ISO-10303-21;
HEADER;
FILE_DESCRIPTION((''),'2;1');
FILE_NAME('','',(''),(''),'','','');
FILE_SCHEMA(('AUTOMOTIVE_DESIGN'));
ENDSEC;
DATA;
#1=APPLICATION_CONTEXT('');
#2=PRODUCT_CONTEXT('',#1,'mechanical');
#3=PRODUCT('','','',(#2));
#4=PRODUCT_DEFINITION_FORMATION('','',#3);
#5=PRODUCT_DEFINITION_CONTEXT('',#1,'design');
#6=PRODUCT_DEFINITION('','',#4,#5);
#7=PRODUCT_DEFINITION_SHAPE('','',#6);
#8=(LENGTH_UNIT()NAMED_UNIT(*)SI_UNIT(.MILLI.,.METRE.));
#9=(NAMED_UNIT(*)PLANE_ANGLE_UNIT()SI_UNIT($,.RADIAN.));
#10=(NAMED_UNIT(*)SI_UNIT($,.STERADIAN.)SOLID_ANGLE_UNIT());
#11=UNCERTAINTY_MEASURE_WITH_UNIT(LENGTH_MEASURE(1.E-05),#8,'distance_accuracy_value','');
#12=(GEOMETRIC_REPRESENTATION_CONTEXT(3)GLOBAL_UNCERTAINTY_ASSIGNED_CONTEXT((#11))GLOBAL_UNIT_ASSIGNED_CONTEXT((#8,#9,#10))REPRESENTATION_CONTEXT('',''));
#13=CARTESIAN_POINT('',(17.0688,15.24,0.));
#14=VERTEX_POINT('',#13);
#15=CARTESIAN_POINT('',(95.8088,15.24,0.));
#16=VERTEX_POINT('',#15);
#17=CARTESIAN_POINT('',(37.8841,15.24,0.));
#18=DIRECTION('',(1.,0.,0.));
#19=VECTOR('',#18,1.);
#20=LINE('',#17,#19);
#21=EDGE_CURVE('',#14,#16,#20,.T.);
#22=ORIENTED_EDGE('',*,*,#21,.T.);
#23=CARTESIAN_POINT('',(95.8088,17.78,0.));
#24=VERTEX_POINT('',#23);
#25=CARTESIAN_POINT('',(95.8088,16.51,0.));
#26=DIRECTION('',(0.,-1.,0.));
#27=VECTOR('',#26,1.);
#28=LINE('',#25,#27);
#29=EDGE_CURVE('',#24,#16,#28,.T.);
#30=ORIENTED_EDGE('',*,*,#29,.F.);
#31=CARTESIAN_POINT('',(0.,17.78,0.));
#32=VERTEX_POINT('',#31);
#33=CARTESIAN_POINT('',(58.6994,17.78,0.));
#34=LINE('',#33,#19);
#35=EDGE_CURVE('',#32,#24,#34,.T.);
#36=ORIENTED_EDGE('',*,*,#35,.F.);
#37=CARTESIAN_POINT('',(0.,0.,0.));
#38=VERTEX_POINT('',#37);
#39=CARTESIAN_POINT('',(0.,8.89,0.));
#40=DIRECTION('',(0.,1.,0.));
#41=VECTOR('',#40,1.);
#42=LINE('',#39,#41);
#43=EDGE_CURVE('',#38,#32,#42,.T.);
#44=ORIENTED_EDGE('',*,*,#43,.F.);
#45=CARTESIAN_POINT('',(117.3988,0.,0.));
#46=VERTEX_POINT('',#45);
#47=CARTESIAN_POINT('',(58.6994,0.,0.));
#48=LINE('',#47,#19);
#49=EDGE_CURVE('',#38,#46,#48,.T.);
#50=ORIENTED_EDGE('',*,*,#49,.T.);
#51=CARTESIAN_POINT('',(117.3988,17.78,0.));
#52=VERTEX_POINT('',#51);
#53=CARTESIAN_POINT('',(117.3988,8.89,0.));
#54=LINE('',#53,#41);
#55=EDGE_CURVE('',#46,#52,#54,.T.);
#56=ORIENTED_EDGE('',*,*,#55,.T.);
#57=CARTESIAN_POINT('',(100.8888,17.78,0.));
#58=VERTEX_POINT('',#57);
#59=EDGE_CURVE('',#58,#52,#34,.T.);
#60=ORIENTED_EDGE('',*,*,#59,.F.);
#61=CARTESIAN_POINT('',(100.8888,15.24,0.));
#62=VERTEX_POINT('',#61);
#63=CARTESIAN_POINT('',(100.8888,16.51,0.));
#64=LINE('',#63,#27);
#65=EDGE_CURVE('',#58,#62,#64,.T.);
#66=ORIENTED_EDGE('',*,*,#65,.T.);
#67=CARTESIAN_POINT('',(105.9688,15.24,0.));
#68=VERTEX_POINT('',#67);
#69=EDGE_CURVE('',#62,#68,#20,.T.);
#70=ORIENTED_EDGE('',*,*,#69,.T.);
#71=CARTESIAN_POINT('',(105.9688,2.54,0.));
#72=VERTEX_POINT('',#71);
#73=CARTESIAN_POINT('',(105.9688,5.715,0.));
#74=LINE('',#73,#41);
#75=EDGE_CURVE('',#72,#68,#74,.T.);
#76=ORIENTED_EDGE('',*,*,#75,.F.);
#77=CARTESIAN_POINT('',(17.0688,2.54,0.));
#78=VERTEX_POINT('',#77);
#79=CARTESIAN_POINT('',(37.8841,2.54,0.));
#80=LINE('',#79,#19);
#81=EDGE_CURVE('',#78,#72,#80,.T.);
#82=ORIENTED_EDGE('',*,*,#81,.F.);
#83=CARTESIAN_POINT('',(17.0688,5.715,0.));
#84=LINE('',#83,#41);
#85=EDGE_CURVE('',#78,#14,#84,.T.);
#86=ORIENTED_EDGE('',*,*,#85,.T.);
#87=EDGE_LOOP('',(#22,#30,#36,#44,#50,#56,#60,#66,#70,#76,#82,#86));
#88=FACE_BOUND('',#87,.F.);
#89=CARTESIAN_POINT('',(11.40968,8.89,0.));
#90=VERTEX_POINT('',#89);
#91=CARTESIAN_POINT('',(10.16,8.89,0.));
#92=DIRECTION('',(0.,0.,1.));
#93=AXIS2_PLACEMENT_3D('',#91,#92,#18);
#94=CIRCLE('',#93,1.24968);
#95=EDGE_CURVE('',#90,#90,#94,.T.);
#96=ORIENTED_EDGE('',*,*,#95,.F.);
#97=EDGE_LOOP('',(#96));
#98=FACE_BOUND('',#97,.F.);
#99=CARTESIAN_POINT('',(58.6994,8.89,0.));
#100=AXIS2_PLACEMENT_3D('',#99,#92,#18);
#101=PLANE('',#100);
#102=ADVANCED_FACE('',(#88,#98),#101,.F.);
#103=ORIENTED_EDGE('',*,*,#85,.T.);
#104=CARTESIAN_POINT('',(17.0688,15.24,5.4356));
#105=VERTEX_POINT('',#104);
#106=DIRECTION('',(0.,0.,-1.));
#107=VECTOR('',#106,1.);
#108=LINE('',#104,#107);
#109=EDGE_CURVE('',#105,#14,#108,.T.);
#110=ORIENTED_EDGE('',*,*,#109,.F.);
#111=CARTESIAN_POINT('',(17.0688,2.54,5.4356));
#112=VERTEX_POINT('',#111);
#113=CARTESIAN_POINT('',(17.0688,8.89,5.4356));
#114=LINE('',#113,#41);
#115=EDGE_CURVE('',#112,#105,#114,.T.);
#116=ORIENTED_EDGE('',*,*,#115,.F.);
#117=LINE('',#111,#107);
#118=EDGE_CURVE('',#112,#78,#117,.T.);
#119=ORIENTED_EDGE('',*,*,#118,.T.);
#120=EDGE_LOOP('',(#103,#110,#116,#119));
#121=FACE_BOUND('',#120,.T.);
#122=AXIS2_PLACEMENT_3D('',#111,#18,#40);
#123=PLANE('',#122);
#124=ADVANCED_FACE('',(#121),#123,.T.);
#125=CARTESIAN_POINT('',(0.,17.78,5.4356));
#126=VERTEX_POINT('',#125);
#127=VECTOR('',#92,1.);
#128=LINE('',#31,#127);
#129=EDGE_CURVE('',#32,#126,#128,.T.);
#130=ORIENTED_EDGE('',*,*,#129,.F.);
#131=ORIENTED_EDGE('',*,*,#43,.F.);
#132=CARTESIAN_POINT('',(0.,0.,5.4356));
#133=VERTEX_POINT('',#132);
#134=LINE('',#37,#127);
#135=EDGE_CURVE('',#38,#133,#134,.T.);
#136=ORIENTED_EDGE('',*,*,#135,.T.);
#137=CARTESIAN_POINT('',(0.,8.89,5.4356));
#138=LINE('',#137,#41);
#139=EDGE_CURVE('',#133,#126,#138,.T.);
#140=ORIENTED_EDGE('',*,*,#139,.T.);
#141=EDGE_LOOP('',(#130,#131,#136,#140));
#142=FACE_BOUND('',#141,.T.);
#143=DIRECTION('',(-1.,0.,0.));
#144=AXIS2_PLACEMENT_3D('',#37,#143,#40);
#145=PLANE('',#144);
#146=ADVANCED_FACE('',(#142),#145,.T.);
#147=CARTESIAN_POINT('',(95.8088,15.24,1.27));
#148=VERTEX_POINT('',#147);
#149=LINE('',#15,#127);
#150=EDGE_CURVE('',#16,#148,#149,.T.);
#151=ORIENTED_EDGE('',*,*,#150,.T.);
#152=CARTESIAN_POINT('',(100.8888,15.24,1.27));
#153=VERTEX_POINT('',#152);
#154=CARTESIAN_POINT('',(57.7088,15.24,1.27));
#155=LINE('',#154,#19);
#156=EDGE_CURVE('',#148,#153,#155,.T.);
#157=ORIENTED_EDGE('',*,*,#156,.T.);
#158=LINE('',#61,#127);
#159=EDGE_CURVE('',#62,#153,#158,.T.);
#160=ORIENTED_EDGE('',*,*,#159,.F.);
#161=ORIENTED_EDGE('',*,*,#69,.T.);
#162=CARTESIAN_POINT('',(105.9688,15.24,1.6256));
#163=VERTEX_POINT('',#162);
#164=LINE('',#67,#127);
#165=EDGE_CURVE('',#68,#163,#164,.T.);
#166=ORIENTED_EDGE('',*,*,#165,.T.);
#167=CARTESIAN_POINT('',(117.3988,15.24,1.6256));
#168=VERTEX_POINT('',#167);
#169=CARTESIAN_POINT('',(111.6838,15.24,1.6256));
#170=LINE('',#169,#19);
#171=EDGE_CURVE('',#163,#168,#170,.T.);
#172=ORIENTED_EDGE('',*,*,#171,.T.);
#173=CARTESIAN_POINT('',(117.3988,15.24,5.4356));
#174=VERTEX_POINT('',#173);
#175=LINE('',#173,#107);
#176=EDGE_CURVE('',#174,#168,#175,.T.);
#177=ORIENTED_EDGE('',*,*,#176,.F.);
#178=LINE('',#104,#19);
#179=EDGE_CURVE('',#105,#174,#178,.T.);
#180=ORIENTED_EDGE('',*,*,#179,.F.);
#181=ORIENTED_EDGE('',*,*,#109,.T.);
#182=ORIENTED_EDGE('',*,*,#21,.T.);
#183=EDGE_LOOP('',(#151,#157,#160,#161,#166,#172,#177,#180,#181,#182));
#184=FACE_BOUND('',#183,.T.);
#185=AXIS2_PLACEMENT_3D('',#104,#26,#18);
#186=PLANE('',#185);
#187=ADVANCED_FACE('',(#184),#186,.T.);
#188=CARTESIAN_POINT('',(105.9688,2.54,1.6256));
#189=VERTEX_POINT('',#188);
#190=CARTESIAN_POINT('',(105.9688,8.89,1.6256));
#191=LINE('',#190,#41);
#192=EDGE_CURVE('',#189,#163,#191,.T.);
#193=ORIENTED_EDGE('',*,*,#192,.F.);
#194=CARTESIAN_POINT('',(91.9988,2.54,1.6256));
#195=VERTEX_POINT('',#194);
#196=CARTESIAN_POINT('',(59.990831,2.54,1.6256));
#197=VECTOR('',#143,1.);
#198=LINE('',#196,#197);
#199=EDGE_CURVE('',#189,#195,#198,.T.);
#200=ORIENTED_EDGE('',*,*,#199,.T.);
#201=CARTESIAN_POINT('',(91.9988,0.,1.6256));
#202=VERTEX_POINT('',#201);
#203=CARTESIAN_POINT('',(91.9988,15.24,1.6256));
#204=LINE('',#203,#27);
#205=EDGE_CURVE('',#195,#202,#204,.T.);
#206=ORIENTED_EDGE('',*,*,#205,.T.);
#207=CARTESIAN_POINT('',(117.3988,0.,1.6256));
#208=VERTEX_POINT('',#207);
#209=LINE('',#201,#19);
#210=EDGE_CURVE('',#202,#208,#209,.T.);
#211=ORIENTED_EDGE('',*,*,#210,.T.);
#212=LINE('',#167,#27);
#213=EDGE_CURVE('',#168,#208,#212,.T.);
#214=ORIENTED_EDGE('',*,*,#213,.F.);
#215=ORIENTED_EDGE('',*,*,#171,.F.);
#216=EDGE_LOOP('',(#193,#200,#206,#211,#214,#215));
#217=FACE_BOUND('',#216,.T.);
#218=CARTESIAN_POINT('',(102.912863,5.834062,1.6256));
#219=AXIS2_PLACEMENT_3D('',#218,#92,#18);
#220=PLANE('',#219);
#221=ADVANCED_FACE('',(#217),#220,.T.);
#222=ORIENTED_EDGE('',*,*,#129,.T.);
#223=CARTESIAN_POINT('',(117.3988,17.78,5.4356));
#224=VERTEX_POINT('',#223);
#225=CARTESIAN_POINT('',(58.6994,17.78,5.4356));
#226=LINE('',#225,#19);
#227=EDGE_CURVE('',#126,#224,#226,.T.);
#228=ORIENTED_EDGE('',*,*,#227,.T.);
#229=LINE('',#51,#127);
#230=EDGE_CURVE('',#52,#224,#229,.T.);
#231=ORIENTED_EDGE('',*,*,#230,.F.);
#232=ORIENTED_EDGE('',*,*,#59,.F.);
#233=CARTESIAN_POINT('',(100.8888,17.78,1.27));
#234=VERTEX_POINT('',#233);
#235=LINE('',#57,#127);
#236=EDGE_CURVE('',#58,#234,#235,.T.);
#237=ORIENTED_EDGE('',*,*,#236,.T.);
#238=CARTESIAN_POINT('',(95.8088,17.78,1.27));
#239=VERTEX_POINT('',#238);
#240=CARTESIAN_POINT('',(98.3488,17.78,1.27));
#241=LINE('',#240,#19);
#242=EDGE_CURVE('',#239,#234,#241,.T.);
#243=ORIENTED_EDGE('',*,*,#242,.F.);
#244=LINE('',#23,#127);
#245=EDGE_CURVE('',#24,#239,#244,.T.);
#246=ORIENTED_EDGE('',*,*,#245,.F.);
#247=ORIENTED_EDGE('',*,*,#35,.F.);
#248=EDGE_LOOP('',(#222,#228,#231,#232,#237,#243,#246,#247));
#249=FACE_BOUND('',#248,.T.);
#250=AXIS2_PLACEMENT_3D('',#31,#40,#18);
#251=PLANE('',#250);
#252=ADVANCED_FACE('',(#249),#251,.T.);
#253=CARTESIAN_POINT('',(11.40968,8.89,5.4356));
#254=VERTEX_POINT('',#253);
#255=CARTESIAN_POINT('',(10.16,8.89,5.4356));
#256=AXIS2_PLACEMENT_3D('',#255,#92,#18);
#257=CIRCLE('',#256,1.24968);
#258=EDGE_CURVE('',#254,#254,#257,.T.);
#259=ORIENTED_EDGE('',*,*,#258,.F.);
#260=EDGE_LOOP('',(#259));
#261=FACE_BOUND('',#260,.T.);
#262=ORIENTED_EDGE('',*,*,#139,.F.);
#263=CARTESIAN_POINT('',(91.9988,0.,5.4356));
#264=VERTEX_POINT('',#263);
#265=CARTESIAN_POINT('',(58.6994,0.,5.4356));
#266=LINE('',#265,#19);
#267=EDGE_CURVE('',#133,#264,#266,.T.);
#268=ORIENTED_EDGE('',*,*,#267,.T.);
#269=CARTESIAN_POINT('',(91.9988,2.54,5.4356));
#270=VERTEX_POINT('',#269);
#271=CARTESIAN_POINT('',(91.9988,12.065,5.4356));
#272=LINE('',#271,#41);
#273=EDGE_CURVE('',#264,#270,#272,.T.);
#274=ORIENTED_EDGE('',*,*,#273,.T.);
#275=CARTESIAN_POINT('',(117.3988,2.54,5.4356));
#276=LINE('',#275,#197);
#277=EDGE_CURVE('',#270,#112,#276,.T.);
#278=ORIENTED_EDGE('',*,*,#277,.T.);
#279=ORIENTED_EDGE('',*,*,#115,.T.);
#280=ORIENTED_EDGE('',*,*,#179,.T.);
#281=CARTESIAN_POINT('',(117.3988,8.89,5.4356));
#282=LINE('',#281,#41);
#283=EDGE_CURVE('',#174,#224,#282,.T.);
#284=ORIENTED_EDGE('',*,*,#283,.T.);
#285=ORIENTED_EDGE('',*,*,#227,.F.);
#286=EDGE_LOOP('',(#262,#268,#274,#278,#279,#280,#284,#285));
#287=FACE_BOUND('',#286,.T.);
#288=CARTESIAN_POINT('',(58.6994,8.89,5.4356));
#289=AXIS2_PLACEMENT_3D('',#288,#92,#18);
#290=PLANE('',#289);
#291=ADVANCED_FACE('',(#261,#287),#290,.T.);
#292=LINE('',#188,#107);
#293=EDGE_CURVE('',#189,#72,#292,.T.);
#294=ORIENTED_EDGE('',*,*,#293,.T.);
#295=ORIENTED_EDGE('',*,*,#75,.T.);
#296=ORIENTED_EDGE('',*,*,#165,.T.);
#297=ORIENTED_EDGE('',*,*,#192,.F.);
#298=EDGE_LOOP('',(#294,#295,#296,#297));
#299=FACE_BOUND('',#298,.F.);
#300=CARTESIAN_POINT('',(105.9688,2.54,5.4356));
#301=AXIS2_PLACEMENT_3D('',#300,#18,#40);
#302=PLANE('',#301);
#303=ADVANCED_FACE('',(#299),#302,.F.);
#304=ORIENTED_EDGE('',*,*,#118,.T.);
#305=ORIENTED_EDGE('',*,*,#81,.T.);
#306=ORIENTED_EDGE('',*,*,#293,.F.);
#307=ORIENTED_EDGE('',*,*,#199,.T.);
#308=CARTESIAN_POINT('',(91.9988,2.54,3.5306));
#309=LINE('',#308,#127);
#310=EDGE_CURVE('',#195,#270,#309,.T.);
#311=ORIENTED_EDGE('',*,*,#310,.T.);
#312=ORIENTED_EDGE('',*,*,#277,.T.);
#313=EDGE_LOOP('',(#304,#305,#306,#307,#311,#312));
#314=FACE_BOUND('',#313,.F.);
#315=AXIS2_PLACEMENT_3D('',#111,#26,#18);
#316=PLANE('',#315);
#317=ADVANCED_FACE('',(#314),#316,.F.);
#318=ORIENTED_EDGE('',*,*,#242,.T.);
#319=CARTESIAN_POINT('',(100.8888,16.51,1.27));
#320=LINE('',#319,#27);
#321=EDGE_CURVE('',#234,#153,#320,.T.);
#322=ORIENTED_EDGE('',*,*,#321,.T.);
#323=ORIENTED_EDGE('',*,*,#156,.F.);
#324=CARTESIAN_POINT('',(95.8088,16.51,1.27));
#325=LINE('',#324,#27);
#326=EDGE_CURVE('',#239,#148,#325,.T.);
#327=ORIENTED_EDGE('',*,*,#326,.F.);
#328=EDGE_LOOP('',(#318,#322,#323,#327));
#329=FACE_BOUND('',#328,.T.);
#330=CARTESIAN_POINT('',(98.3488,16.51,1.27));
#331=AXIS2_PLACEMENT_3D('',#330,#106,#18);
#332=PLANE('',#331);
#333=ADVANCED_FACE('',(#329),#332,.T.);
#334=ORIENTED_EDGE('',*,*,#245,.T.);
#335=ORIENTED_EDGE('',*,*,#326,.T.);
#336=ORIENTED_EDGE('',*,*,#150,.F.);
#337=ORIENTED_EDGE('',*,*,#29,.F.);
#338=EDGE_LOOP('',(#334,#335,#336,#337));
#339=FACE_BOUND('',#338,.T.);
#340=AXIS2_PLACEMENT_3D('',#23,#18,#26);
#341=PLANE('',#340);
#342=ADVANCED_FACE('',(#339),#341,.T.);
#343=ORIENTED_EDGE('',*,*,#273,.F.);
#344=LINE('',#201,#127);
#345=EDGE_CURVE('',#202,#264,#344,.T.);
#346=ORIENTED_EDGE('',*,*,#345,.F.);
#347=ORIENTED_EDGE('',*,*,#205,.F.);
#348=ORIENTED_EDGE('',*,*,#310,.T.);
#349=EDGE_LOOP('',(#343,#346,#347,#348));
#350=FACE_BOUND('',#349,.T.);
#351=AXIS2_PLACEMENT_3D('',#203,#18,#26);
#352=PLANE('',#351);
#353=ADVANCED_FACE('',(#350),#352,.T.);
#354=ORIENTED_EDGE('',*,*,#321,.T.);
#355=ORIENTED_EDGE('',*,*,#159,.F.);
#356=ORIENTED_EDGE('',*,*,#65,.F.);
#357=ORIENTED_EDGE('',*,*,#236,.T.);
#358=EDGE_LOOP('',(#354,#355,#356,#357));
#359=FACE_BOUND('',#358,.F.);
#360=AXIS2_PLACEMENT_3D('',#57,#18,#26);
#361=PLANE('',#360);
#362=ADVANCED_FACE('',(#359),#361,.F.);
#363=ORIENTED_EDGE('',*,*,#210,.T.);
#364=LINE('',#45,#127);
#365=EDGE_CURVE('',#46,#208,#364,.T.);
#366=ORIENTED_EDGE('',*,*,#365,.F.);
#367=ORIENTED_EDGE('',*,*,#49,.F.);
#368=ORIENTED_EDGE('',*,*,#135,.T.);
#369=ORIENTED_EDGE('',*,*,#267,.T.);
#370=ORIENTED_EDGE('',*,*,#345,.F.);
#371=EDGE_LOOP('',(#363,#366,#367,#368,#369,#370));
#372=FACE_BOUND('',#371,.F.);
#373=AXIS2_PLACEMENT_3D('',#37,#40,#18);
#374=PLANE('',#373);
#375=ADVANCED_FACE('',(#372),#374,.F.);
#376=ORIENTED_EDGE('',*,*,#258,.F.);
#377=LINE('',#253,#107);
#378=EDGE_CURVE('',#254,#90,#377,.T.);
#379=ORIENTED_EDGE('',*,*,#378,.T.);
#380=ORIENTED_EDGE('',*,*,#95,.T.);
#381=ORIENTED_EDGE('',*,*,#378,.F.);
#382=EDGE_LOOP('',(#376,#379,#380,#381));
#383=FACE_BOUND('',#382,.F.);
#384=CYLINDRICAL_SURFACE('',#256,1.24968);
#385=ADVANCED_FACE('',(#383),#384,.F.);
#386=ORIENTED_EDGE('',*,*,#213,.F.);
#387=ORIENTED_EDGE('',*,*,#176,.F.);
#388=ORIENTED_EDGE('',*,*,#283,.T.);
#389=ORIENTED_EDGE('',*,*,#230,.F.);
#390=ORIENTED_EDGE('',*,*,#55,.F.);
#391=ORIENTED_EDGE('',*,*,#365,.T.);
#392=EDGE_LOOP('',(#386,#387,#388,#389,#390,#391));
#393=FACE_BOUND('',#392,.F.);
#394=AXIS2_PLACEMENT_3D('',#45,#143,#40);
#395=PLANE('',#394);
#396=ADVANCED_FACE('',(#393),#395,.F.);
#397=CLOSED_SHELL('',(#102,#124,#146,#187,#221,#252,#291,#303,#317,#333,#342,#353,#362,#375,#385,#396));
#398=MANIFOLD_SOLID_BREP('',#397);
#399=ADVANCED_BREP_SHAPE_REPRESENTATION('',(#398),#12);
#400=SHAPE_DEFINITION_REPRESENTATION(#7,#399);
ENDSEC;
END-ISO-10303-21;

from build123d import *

# Parameters (mm, degrees)
F0_W      = 117.3988
F0_H      = 17.78
F1_DEPTH  = 5.4356
F2_W      = 88.9
F2_H      = 12.7
F3_DEPTH  = 25.4
F4_W      = 11.43
F4_H      = 12.7
F5_DEPTH  = 3.81
F7_DEPTH  = 169
F8_R      = 1.24968
F9_DEPTH  = 5.4356
F10_W     = 5.08
F10_H     = 2.54
F11_DEPTH = 1.27


# Not quite as in the source:
# - an extrude ends at something that could not be found from the text; its depth is read off the source's solid


with BuildPart() as f1:
    # F0 (on Top) → F1 (new body)
    with BuildSketch(Plane.XY):
        with Locations((58.6994, 8.89)):
            Rectangle(F0_W, F0_H)
    extrude(amount=F1_DEPTH)

    # F2 (on face) → F3 (cut)
    with BuildSketch(Plane.XY.offset(5.4356)):
        with Locations((61.5188, 8.89)):
            Rectangle(F2_W, F2_H)
    extrude(amount=-F3_DEPTH, mode=Mode.SUBTRACT)

    # F4 (on face) → F5 (cut)
    with BuildSketch(Plane.XY.offset(5.4356)):
        with Locations((111.6838, 8.89)):
            Rectangle(F4_W, F4_H)
    extrude(amount=-F5_DEPTH, mode=Mode.SUBTRACT)

    # F6 (on face) → F7 (cut, through all)
    with BuildSketch(Plane.XY.offset(1.6256)):
        Polygon((105.9688, 2.54), (105.9688, 15.24), (91.9988, 15.24), (91.9988, 0), (117.3988, 0), (117.3988, 2.54), align=None)
    extrude(amount=F7_DEPTH, mode=Mode.SUBTRACT)

    # F8 (on face) → F9 (cut, through all)
    with BuildSketch(Plane.XY.offset(5.4356)):
        with Locations((10.16, 8.89)):
            Circle(F8_R)
    extrude(amount=-F9_DEPTH, mode=Mode.SUBTRACT)

    # F10 (on face) → F11 (cut)
    with BuildSketch(Plane(origin=(0, 0, 0), x_dir=(1, 0, 0), z_dir=(0, 0, -1))):
        with Locations((98.3488, -16.51)):
            Rectangle(F10_W, F10_H)
        Polygon((95.8088, -15.24), (100.8888, -15.24), (105.9688, -15.24), (105.9688, -2.54), (17.0688, -2.54), (17.0688, -15.24), align=None)
    extrude(amount=-F11_DEPTH, mode=Mode.SUBTRACT)


solid = f1.part
